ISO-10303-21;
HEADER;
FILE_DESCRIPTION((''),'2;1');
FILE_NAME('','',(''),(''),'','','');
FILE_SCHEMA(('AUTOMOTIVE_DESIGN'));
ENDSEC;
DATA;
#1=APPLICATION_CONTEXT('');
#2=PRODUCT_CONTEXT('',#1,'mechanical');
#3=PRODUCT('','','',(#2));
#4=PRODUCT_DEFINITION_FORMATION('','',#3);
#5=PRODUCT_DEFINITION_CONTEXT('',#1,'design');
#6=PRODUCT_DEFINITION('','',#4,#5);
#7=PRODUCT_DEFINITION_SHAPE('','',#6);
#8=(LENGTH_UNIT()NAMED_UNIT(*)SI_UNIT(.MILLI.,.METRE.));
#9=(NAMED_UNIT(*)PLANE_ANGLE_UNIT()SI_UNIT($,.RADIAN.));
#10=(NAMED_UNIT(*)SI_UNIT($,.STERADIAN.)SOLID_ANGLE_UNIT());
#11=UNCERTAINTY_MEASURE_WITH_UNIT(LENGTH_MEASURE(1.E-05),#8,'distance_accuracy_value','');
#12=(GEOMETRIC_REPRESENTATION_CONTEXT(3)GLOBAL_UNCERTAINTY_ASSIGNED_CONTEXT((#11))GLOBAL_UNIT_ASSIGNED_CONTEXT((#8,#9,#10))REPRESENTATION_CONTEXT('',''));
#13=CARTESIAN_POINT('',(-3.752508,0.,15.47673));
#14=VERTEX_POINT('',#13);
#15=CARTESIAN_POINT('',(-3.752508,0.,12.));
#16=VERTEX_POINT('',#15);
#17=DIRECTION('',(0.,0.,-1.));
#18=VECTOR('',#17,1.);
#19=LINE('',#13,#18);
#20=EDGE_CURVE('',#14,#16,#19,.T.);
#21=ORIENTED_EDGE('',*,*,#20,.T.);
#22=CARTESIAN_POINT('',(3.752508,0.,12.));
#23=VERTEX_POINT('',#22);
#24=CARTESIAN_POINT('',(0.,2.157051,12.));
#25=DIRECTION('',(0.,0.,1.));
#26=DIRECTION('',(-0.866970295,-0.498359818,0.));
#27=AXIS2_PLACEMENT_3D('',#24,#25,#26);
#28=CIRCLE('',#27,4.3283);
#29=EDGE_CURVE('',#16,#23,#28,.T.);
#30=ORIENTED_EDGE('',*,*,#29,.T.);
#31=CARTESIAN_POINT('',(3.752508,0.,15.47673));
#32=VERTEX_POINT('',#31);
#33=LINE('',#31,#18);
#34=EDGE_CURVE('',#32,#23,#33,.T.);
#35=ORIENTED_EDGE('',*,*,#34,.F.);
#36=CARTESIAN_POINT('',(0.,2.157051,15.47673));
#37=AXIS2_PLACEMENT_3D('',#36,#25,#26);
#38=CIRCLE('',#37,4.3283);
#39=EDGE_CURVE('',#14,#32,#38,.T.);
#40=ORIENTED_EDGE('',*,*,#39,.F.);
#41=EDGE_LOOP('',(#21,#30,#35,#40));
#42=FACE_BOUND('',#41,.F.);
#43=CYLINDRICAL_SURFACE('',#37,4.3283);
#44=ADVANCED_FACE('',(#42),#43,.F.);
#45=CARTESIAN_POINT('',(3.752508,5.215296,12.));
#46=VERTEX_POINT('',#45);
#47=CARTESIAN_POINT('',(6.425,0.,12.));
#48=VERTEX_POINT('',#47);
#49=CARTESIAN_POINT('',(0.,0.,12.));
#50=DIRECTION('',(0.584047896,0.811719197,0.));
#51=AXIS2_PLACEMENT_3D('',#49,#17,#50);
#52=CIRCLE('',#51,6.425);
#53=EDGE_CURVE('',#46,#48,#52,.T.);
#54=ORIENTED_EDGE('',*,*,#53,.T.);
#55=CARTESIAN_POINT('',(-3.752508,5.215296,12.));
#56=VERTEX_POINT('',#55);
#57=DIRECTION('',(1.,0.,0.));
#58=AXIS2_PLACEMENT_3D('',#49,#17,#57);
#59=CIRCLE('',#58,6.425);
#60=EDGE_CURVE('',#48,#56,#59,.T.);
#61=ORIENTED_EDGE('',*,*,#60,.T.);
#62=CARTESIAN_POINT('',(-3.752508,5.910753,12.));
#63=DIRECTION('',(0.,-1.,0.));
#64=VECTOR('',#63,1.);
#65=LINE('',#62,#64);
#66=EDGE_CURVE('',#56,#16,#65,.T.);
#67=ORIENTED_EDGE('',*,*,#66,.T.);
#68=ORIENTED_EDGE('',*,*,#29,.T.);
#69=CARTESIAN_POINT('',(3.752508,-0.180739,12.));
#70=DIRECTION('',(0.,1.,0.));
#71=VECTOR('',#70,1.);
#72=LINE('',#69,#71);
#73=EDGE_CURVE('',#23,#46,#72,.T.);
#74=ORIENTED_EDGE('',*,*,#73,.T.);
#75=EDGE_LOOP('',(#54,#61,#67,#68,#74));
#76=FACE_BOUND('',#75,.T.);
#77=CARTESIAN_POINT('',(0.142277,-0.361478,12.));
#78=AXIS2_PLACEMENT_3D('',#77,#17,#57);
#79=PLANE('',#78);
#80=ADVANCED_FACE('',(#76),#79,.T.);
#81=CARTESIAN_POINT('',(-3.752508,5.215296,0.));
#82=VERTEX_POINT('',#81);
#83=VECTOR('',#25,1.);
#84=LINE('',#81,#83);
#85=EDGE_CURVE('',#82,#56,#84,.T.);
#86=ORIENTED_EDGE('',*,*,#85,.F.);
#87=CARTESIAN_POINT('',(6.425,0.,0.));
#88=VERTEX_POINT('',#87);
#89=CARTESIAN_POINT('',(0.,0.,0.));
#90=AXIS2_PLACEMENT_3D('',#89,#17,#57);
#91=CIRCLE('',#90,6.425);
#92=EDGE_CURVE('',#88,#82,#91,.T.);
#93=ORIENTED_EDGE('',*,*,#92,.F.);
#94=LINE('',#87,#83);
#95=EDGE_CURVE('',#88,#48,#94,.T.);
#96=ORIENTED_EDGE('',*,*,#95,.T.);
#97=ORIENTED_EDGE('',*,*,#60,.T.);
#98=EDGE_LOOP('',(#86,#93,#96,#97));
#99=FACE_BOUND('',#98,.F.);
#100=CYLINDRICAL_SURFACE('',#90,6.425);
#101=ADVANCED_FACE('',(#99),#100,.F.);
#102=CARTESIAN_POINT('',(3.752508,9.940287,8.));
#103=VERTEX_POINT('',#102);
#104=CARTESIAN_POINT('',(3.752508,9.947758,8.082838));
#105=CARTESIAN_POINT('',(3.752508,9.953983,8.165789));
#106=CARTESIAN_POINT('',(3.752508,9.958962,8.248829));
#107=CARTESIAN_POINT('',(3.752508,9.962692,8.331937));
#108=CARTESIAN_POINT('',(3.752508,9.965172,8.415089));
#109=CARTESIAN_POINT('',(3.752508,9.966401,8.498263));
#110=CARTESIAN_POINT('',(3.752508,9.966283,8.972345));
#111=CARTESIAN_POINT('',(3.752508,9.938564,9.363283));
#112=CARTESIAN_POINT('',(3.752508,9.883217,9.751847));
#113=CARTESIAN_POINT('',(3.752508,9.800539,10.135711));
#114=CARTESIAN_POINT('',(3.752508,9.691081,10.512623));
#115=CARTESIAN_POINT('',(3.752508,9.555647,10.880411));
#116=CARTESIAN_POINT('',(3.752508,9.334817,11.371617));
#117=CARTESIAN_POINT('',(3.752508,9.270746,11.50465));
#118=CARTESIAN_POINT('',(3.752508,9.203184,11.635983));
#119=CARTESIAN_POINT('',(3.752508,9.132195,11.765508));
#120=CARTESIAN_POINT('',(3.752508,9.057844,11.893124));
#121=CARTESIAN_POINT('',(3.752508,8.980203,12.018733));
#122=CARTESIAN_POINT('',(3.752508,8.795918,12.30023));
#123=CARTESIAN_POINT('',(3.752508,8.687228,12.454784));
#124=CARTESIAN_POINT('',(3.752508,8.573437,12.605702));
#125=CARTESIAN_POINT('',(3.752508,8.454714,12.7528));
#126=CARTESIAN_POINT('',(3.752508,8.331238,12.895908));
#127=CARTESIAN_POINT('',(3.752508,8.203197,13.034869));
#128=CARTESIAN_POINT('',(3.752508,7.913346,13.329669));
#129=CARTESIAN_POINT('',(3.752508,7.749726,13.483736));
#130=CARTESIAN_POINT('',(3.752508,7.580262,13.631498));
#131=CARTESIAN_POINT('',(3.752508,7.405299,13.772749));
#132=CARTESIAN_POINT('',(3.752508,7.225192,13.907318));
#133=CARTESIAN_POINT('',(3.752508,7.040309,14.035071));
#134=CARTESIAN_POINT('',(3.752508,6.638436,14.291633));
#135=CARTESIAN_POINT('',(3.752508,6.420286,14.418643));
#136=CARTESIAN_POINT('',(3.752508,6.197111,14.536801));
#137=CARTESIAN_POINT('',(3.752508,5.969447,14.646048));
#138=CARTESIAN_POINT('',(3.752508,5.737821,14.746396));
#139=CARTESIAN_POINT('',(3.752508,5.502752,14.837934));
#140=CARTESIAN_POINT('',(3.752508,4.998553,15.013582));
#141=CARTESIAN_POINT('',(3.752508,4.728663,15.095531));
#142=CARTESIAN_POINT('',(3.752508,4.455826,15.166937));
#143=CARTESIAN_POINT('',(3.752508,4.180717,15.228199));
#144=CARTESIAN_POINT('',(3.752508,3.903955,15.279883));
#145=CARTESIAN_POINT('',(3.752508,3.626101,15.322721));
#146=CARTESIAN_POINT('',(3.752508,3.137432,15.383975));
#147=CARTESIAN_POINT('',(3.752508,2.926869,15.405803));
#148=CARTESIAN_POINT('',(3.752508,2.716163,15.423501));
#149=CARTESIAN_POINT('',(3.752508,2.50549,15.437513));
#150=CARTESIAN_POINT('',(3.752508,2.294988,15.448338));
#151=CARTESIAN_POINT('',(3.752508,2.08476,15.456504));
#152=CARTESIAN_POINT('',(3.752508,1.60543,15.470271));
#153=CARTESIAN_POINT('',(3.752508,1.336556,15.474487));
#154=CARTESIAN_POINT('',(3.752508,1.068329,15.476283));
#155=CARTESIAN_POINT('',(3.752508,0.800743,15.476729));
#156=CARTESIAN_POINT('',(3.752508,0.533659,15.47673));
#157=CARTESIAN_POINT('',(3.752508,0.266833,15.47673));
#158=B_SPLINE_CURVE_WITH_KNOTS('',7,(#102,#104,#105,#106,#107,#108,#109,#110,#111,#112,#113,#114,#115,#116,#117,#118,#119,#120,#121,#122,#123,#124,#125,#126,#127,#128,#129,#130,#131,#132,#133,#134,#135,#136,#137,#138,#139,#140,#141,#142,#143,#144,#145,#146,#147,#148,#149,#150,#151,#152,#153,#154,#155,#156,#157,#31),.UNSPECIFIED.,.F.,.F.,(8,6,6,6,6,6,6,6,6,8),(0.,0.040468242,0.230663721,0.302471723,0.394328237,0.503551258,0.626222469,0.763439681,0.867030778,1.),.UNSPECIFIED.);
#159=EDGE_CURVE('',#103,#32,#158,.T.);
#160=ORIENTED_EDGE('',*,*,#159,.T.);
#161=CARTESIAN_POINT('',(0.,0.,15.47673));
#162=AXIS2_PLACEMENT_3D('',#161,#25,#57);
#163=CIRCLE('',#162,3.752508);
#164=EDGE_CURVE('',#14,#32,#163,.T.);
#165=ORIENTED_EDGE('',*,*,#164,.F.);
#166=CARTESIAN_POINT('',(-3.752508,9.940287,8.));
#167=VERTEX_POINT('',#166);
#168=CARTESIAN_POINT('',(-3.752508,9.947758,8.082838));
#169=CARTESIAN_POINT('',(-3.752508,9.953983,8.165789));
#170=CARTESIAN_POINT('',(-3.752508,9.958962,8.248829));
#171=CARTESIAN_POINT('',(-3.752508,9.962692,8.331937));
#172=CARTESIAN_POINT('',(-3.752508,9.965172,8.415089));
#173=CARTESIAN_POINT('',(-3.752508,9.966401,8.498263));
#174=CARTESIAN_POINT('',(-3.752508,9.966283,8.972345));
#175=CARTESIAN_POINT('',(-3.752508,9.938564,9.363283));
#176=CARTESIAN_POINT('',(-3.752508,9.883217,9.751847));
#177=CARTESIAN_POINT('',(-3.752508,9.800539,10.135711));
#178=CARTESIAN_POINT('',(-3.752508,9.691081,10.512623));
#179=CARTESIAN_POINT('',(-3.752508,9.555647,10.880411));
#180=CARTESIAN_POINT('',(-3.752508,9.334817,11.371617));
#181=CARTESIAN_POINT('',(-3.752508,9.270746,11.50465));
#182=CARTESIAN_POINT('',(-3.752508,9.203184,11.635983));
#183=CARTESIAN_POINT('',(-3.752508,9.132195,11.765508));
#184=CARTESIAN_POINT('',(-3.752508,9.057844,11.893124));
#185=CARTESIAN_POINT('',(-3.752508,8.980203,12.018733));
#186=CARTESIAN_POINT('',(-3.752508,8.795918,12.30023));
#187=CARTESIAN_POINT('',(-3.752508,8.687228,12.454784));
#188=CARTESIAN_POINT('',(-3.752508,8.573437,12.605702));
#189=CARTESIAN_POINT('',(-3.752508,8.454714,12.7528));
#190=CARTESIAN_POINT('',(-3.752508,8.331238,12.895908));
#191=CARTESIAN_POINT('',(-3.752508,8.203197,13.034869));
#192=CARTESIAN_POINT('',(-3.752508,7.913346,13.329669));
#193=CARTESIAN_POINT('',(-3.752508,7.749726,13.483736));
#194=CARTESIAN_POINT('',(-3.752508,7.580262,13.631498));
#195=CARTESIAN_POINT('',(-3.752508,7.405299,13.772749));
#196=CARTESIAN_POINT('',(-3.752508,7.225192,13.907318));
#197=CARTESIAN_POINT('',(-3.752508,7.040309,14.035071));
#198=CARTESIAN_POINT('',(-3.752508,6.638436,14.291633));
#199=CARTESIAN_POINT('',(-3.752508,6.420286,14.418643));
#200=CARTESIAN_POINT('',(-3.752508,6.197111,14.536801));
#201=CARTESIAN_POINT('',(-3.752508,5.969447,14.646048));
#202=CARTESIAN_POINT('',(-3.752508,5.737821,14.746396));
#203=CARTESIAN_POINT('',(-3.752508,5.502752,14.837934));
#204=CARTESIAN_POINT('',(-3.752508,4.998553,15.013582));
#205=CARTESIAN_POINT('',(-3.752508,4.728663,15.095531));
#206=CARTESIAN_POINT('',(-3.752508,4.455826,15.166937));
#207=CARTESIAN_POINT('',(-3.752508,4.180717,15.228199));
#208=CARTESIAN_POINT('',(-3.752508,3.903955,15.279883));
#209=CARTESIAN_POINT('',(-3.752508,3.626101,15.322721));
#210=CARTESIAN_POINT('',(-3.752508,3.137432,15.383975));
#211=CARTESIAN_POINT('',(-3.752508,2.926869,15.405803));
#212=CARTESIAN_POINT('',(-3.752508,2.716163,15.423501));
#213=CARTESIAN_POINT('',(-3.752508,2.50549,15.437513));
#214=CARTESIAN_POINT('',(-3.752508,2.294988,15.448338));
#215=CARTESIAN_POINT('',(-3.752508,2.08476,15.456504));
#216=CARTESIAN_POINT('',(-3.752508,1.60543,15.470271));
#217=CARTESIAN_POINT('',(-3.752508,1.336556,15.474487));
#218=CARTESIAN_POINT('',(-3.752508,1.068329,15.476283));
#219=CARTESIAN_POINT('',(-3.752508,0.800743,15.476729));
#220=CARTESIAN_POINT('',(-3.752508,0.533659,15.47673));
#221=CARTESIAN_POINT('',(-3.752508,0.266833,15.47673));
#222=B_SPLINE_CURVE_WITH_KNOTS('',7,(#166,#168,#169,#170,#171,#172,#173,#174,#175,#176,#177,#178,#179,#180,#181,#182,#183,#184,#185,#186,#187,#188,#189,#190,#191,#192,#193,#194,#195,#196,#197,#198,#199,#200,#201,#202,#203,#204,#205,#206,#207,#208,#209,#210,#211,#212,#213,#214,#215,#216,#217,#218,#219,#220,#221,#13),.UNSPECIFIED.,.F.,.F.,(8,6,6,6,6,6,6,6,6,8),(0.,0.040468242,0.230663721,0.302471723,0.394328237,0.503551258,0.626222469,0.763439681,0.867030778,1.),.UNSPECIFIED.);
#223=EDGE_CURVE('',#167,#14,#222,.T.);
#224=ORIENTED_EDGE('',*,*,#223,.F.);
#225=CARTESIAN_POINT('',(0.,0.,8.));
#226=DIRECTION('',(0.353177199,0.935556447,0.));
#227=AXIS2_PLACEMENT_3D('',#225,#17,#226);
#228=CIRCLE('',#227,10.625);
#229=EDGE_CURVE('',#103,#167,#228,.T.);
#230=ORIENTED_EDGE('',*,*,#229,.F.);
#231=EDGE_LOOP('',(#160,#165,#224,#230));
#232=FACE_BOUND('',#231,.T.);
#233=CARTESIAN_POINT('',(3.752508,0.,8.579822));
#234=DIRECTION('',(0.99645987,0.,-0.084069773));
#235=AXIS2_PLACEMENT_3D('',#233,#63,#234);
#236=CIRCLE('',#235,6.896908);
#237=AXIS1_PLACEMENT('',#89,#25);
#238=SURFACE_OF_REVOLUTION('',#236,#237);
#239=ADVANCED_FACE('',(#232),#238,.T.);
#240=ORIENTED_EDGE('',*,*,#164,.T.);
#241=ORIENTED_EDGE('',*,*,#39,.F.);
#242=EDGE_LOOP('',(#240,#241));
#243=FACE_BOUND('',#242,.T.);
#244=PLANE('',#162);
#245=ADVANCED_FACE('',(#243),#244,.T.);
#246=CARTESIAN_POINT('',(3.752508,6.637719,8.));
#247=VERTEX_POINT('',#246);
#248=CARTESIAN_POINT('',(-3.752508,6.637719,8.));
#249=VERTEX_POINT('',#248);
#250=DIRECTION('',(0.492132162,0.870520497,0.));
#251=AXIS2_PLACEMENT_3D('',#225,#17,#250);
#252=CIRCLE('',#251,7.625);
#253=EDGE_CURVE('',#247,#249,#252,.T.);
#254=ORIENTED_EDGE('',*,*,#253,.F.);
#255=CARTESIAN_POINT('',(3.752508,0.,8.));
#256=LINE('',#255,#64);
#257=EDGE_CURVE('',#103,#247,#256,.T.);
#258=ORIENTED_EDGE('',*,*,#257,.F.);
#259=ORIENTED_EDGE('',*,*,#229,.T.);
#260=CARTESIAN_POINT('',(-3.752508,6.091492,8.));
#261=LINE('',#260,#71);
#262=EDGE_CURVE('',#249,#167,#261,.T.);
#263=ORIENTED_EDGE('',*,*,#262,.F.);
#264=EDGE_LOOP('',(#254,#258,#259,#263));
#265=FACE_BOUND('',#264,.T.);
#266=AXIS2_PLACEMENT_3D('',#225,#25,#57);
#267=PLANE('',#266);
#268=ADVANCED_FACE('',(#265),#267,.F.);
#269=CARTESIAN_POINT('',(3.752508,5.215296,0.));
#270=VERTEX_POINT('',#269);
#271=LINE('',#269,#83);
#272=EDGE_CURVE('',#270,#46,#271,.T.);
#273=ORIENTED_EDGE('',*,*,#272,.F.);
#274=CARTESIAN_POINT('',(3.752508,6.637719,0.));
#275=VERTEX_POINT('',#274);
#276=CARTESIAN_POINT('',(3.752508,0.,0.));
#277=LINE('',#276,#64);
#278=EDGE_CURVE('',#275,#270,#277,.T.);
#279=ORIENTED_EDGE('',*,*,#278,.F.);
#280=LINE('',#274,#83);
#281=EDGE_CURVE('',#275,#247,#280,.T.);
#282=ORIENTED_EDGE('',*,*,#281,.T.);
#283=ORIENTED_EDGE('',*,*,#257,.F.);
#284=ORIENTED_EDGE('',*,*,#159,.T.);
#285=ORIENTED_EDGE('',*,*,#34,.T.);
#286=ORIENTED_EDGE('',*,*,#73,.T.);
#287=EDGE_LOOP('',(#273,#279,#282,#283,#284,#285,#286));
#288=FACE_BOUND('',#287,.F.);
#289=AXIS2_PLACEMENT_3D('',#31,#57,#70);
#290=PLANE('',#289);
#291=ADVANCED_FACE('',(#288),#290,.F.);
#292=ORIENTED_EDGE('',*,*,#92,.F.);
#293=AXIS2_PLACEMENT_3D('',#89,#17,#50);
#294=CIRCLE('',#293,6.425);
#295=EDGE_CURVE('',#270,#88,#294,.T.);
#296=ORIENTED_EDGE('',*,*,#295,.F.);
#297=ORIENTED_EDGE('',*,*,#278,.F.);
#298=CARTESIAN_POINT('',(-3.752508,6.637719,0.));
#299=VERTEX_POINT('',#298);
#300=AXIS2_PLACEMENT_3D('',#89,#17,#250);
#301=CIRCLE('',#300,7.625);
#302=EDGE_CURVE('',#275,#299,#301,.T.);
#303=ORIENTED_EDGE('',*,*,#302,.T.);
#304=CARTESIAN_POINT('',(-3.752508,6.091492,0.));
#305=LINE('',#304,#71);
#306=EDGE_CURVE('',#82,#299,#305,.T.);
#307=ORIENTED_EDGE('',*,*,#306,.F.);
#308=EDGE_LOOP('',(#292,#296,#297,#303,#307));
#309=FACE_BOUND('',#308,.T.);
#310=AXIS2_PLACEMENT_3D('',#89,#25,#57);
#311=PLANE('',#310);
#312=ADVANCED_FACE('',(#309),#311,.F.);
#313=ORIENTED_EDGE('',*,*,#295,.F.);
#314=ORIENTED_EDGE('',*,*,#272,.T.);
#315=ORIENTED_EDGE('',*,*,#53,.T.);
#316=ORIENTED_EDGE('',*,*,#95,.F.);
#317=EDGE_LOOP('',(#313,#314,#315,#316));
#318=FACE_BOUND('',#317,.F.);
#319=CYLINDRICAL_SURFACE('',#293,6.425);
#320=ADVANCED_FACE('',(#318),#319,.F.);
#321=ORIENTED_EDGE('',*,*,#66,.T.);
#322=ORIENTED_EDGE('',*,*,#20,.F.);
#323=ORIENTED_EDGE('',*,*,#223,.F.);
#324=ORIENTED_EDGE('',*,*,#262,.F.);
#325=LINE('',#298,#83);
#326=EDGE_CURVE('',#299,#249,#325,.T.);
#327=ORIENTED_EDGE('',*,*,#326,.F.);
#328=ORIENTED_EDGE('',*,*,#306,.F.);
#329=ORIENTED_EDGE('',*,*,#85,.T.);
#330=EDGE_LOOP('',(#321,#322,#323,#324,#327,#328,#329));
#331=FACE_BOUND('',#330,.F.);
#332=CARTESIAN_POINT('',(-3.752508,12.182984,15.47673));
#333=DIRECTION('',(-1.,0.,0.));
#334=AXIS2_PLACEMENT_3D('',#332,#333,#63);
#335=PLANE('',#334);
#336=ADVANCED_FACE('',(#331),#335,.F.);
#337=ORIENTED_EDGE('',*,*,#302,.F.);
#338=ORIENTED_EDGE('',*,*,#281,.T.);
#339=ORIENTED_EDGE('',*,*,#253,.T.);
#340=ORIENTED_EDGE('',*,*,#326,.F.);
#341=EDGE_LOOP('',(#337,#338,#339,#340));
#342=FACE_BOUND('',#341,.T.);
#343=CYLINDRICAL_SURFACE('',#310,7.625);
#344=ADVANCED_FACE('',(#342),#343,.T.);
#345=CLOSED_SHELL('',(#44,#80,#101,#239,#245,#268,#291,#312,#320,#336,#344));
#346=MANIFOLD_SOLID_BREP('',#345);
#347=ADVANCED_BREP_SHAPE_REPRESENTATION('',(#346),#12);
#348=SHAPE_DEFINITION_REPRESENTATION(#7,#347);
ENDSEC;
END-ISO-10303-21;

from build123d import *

# Parameters (mm, degrees)
F4_DEPTH = 15.4777297208
F6_DEPTH = 12


with BuildPart() as f2:
    # F1 (on Front) → F2 (revolve)
    with BuildSketch(Plane.XZ):
        with BuildLine():
            Line((0, 15.4767297208), (0, 0))
            Line((0, 0), (7.625, 0))
            Line((7.625, 0), (7.625, 8))
            Line((7.625, 8), (10.625, 8))
            ThreePointArc((10.625, 8), (8.8302197506, 13.2471744611), (3.752507735, 15.4767297208))
            Line((3.752507735, 15.4767297208), (0, 15.4767297208))
        make_face()
    revolve(axis=Axis((0, 0, 0), (0, 0, 1)))

    # F3 (on face) → F4 (cut, through all)
    with BuildSketch(Plane.XY.offset(15.4767297208)):
        with BuildLine():
            ThreePointArc((-3.752507735, 0), (0, -2.1712493207), (3.752507735, 0))
            ThreePointArc((3.752507735, 0), (0, 3.752507735), (-3.752507735, 0))
        make_face()
        with BuildLine():
            Line((3.752507735, 0), (3.752507735, 9.9402872543))
            ThreePointArc((3.752507735, 9.9402872543), (0, 10.625), (-3.752507735, 9.9402872543))
            Line((-3.752507735, 9.9402872543), (-3.752507735, 0))
            ThreePointArc((-3.752507735, 0), (0, 3.752507735), (3.752507735, 0))
        make_face()
        with BuildLine():
            ThreePointArc((-3.752507735, 9.9402872543), (0, 10.625), (3.752507735, 9.9402872543))
            Line((3.752507735, 9.9402872543), (3.752507735, 12.1829835698))
            Line((3.752507735, 12.1829835698), (-3.752507735, 12.1829835698))
            Line((-3.752507735, 12.1829835698), (-3.752507735, 9.9402872543))
        make_face()
    extrude(amount=-F4_DEPTH, mode=Mode.SUBTRACT)

    # F5 (on face) → F6 (cut)
    with BuildSketch(Plane(origin=(0, 0, 0), x_dir=(1, 0, 0), z_dir=(0, 0, -1))):
        with BuildLine():
            ThreePointArc((3.752507735, -5.21529584), (5.7179754808, -2.9300821492), (6.425, 0))
            ThreePointArc((6.425, 0), (-2.9300821492, 5.7179754808), (-3.752507735, -5.21529584))
            Line((-3.752507735, -5.21529584), (-3.752507735, 0))
            ThreePointArc((-3.752507735, 0), (0, 2.1712493207), (3.752507735, 0))
            Line((3.752507735, 0), (3.752507735, -5.21529584))
        make_face()
        with BuildLine():
            Line((-3.752507735, 0), (-3.752507735, -5.21529584))
            ThreePointArc((-3.752507735, -5.21529584), (0, -6.425), (3.752507735, -5.21529584))
            Line((3.752507735, -5.21529584), (3.752507735, 0))
            ThreePointArc((3.752507735, 0), (0, 2.1712493207), (-3.752507735, 0))
        make_face()
    extrude(amount=-F6_DEPTH, mode=Mode.SUBTRACT)


solid = f2.part
